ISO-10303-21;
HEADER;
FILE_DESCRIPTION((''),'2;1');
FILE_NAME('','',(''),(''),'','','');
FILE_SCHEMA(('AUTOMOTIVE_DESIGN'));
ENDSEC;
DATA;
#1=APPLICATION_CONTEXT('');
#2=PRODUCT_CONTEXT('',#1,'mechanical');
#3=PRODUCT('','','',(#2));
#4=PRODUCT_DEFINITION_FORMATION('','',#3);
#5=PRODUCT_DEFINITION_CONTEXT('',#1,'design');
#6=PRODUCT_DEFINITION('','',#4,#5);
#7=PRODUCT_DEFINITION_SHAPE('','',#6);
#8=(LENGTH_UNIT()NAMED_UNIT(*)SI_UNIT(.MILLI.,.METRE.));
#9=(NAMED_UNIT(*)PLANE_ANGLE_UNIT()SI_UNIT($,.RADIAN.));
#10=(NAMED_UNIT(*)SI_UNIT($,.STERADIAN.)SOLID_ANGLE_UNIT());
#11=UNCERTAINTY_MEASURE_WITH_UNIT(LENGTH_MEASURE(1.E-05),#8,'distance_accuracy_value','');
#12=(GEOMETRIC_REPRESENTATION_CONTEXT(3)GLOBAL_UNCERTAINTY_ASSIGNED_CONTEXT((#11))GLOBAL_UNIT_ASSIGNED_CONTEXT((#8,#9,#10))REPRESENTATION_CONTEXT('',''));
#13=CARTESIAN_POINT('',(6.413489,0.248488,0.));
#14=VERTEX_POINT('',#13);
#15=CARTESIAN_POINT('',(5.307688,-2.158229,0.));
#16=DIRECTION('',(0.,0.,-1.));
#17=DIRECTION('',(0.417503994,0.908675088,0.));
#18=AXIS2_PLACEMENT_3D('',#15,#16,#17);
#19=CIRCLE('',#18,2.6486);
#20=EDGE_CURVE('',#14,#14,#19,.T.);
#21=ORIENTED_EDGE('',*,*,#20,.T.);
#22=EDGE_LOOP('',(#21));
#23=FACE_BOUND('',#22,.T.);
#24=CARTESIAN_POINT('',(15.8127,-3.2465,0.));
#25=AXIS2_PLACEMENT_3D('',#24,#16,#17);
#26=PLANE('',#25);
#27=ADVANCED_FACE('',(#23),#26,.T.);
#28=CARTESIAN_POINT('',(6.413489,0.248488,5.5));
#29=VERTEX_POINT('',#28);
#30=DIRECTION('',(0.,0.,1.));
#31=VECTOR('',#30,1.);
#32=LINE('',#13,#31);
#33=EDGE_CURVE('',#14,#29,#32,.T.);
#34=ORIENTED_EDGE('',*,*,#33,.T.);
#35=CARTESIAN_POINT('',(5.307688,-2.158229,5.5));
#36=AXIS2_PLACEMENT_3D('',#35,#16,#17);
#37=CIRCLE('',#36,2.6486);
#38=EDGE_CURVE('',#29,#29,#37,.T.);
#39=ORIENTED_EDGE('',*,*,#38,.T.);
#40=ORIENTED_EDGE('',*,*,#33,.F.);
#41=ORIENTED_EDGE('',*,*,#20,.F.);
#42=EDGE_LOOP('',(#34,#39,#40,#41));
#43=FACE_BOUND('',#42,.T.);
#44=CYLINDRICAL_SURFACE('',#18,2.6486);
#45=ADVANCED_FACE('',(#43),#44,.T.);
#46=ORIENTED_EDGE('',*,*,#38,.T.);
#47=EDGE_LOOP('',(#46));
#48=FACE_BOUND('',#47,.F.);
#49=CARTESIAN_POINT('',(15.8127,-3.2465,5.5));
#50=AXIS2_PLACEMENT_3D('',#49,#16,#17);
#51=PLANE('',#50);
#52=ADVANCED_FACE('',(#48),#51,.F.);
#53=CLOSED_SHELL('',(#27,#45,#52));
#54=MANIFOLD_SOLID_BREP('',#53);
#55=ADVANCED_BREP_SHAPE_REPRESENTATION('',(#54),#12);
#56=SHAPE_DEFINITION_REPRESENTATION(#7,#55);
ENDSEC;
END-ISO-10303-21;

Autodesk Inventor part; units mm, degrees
ref_plane "XZ Plane" through (0, 0, 0) normal (0, 1, 0) x (-1, 0, 0)
ref_plane "XY Plane" through (0, 0, 0) normal (0, 0, 1) x (1, 0, 0)
ref_plane "Work Plane1" through (15.8127, -3.2465, 0) normal (0, 0, -1) x (0.417504, 0.9086751, 0)
sketch "Sketch1" plane through (15.8127, -3.2465, 0) normal (0, 0, -1) x (0.417504, 0.9086751, 0)
  line L0 (-7.897, -2) -> (1.603, -2) projected
  line L1 (1.603, -2) -> (1.603, -5.5) projected
  line L2 (1.603, -5.5) -> (-7.897, -5.5) projected
  line L3 (-7.897, -5.5) -> (-7.897, -2) projected
  line L4 (1.603, -19) -> (-7.897, -19) projected
  line L5 (-7.897, -19) -> (-7.897, -15.5) projected
  line L6 (-7.897, -15.5) -> (1.603, -15.5) projected
  line L7 (1.603, -15.5) -> (1.603, -19) projected
  arc A0 (9.303, -26.8555) -> (8.303, -25.8555) centre (8.303, -26.8555) ccw projected
  line L8 (9.303, -26.8555) -> (9.303, -30) projected
  line L9 (9.303, -30) -> (-16.397, -30) projected
  line L10 (-16.397, -30) -> (-16.397, -20.4723) projected
  arc A1 (-15.397, -19.4723) -> (-16.397, -20.4723) centre (-15.397, -20.4723) ccw projected
  line L11 (-15.397, -19.4723) -> (-13.5347, -19.4723) projected
  arc A2 (-13.5347, -19.4723) -> (-12.5347, -18.4723) centre (-13.5347, -18.4723) ccw projected
  line L12 (-12.5347, -18.4723) -> (-12.5347, 0) projected
  line L13 (-12.5347, 0) -> (-1, 0) projected
  arc A3 (-1, 0) -> (0, 1) centre (-1, 1) ccw projected
  line L14 (0, 1) -> (0, 2) projected
  arc A4 (1, 3) -> (0, 2) centre (1, 2) ccw projected
  line L15 (1, 3) -> (3.5653, 3) projected
  arc A5 (4.5653, 2) -> (3.5653, 3) centre (3.5653, 2) ccw projected
  line L16 (4.5653, 2) -> (4.5653, -24.8555) projected
  arc A6 (4.5653, -24.8555) -> (5.5653, -25.8555) centre (5.5653, -24.8555) ccw projected
  line L17 (5.5653, -25.8555) -> (8.303, -25.8555) projected
  line L18 (2.603, -17.5) -> (2.603, -2) projected
  line L19 (2.603, -2) -> (-10.897, -2) projected
  line L20 (-10.897, -2) -> (-10.897, -17.5) projected
  line L21 (-10.897, -17.5) -> (2.603, -17.5) projected
  circle A7 centre (6.603, -27.5) radius 1 projected
  circle A8 centre (-13.897, -21) radius 1 projected
  circle A9 centre (1.603, 0.5) radius 1 projected
  circle A10 centre (-3.397, -10) radius 2.6486
  point P0 (-3.6519, -15.7241)
  dimension "d0" = 10.5
  dimension "d1" = 11
  dimension "d2" = 10.5
  dimension "d3" = 5
extrude "Extrusion1" add sketch "Sketch1" against normal up to surface (5.5 mm away) contours A10
ref_plane "Arbeitsebene3" through (5.3077, -2.1583, -1) normal (1, 0, 0) x (0, 1, 0)
ref_plane "Arbeitsebene2" through (6.1989, 13.4015, -1) normal (0, 0, 1) x (-0.417504, -0.9086751, 0)
properties part number "00_KES400_Lens"
